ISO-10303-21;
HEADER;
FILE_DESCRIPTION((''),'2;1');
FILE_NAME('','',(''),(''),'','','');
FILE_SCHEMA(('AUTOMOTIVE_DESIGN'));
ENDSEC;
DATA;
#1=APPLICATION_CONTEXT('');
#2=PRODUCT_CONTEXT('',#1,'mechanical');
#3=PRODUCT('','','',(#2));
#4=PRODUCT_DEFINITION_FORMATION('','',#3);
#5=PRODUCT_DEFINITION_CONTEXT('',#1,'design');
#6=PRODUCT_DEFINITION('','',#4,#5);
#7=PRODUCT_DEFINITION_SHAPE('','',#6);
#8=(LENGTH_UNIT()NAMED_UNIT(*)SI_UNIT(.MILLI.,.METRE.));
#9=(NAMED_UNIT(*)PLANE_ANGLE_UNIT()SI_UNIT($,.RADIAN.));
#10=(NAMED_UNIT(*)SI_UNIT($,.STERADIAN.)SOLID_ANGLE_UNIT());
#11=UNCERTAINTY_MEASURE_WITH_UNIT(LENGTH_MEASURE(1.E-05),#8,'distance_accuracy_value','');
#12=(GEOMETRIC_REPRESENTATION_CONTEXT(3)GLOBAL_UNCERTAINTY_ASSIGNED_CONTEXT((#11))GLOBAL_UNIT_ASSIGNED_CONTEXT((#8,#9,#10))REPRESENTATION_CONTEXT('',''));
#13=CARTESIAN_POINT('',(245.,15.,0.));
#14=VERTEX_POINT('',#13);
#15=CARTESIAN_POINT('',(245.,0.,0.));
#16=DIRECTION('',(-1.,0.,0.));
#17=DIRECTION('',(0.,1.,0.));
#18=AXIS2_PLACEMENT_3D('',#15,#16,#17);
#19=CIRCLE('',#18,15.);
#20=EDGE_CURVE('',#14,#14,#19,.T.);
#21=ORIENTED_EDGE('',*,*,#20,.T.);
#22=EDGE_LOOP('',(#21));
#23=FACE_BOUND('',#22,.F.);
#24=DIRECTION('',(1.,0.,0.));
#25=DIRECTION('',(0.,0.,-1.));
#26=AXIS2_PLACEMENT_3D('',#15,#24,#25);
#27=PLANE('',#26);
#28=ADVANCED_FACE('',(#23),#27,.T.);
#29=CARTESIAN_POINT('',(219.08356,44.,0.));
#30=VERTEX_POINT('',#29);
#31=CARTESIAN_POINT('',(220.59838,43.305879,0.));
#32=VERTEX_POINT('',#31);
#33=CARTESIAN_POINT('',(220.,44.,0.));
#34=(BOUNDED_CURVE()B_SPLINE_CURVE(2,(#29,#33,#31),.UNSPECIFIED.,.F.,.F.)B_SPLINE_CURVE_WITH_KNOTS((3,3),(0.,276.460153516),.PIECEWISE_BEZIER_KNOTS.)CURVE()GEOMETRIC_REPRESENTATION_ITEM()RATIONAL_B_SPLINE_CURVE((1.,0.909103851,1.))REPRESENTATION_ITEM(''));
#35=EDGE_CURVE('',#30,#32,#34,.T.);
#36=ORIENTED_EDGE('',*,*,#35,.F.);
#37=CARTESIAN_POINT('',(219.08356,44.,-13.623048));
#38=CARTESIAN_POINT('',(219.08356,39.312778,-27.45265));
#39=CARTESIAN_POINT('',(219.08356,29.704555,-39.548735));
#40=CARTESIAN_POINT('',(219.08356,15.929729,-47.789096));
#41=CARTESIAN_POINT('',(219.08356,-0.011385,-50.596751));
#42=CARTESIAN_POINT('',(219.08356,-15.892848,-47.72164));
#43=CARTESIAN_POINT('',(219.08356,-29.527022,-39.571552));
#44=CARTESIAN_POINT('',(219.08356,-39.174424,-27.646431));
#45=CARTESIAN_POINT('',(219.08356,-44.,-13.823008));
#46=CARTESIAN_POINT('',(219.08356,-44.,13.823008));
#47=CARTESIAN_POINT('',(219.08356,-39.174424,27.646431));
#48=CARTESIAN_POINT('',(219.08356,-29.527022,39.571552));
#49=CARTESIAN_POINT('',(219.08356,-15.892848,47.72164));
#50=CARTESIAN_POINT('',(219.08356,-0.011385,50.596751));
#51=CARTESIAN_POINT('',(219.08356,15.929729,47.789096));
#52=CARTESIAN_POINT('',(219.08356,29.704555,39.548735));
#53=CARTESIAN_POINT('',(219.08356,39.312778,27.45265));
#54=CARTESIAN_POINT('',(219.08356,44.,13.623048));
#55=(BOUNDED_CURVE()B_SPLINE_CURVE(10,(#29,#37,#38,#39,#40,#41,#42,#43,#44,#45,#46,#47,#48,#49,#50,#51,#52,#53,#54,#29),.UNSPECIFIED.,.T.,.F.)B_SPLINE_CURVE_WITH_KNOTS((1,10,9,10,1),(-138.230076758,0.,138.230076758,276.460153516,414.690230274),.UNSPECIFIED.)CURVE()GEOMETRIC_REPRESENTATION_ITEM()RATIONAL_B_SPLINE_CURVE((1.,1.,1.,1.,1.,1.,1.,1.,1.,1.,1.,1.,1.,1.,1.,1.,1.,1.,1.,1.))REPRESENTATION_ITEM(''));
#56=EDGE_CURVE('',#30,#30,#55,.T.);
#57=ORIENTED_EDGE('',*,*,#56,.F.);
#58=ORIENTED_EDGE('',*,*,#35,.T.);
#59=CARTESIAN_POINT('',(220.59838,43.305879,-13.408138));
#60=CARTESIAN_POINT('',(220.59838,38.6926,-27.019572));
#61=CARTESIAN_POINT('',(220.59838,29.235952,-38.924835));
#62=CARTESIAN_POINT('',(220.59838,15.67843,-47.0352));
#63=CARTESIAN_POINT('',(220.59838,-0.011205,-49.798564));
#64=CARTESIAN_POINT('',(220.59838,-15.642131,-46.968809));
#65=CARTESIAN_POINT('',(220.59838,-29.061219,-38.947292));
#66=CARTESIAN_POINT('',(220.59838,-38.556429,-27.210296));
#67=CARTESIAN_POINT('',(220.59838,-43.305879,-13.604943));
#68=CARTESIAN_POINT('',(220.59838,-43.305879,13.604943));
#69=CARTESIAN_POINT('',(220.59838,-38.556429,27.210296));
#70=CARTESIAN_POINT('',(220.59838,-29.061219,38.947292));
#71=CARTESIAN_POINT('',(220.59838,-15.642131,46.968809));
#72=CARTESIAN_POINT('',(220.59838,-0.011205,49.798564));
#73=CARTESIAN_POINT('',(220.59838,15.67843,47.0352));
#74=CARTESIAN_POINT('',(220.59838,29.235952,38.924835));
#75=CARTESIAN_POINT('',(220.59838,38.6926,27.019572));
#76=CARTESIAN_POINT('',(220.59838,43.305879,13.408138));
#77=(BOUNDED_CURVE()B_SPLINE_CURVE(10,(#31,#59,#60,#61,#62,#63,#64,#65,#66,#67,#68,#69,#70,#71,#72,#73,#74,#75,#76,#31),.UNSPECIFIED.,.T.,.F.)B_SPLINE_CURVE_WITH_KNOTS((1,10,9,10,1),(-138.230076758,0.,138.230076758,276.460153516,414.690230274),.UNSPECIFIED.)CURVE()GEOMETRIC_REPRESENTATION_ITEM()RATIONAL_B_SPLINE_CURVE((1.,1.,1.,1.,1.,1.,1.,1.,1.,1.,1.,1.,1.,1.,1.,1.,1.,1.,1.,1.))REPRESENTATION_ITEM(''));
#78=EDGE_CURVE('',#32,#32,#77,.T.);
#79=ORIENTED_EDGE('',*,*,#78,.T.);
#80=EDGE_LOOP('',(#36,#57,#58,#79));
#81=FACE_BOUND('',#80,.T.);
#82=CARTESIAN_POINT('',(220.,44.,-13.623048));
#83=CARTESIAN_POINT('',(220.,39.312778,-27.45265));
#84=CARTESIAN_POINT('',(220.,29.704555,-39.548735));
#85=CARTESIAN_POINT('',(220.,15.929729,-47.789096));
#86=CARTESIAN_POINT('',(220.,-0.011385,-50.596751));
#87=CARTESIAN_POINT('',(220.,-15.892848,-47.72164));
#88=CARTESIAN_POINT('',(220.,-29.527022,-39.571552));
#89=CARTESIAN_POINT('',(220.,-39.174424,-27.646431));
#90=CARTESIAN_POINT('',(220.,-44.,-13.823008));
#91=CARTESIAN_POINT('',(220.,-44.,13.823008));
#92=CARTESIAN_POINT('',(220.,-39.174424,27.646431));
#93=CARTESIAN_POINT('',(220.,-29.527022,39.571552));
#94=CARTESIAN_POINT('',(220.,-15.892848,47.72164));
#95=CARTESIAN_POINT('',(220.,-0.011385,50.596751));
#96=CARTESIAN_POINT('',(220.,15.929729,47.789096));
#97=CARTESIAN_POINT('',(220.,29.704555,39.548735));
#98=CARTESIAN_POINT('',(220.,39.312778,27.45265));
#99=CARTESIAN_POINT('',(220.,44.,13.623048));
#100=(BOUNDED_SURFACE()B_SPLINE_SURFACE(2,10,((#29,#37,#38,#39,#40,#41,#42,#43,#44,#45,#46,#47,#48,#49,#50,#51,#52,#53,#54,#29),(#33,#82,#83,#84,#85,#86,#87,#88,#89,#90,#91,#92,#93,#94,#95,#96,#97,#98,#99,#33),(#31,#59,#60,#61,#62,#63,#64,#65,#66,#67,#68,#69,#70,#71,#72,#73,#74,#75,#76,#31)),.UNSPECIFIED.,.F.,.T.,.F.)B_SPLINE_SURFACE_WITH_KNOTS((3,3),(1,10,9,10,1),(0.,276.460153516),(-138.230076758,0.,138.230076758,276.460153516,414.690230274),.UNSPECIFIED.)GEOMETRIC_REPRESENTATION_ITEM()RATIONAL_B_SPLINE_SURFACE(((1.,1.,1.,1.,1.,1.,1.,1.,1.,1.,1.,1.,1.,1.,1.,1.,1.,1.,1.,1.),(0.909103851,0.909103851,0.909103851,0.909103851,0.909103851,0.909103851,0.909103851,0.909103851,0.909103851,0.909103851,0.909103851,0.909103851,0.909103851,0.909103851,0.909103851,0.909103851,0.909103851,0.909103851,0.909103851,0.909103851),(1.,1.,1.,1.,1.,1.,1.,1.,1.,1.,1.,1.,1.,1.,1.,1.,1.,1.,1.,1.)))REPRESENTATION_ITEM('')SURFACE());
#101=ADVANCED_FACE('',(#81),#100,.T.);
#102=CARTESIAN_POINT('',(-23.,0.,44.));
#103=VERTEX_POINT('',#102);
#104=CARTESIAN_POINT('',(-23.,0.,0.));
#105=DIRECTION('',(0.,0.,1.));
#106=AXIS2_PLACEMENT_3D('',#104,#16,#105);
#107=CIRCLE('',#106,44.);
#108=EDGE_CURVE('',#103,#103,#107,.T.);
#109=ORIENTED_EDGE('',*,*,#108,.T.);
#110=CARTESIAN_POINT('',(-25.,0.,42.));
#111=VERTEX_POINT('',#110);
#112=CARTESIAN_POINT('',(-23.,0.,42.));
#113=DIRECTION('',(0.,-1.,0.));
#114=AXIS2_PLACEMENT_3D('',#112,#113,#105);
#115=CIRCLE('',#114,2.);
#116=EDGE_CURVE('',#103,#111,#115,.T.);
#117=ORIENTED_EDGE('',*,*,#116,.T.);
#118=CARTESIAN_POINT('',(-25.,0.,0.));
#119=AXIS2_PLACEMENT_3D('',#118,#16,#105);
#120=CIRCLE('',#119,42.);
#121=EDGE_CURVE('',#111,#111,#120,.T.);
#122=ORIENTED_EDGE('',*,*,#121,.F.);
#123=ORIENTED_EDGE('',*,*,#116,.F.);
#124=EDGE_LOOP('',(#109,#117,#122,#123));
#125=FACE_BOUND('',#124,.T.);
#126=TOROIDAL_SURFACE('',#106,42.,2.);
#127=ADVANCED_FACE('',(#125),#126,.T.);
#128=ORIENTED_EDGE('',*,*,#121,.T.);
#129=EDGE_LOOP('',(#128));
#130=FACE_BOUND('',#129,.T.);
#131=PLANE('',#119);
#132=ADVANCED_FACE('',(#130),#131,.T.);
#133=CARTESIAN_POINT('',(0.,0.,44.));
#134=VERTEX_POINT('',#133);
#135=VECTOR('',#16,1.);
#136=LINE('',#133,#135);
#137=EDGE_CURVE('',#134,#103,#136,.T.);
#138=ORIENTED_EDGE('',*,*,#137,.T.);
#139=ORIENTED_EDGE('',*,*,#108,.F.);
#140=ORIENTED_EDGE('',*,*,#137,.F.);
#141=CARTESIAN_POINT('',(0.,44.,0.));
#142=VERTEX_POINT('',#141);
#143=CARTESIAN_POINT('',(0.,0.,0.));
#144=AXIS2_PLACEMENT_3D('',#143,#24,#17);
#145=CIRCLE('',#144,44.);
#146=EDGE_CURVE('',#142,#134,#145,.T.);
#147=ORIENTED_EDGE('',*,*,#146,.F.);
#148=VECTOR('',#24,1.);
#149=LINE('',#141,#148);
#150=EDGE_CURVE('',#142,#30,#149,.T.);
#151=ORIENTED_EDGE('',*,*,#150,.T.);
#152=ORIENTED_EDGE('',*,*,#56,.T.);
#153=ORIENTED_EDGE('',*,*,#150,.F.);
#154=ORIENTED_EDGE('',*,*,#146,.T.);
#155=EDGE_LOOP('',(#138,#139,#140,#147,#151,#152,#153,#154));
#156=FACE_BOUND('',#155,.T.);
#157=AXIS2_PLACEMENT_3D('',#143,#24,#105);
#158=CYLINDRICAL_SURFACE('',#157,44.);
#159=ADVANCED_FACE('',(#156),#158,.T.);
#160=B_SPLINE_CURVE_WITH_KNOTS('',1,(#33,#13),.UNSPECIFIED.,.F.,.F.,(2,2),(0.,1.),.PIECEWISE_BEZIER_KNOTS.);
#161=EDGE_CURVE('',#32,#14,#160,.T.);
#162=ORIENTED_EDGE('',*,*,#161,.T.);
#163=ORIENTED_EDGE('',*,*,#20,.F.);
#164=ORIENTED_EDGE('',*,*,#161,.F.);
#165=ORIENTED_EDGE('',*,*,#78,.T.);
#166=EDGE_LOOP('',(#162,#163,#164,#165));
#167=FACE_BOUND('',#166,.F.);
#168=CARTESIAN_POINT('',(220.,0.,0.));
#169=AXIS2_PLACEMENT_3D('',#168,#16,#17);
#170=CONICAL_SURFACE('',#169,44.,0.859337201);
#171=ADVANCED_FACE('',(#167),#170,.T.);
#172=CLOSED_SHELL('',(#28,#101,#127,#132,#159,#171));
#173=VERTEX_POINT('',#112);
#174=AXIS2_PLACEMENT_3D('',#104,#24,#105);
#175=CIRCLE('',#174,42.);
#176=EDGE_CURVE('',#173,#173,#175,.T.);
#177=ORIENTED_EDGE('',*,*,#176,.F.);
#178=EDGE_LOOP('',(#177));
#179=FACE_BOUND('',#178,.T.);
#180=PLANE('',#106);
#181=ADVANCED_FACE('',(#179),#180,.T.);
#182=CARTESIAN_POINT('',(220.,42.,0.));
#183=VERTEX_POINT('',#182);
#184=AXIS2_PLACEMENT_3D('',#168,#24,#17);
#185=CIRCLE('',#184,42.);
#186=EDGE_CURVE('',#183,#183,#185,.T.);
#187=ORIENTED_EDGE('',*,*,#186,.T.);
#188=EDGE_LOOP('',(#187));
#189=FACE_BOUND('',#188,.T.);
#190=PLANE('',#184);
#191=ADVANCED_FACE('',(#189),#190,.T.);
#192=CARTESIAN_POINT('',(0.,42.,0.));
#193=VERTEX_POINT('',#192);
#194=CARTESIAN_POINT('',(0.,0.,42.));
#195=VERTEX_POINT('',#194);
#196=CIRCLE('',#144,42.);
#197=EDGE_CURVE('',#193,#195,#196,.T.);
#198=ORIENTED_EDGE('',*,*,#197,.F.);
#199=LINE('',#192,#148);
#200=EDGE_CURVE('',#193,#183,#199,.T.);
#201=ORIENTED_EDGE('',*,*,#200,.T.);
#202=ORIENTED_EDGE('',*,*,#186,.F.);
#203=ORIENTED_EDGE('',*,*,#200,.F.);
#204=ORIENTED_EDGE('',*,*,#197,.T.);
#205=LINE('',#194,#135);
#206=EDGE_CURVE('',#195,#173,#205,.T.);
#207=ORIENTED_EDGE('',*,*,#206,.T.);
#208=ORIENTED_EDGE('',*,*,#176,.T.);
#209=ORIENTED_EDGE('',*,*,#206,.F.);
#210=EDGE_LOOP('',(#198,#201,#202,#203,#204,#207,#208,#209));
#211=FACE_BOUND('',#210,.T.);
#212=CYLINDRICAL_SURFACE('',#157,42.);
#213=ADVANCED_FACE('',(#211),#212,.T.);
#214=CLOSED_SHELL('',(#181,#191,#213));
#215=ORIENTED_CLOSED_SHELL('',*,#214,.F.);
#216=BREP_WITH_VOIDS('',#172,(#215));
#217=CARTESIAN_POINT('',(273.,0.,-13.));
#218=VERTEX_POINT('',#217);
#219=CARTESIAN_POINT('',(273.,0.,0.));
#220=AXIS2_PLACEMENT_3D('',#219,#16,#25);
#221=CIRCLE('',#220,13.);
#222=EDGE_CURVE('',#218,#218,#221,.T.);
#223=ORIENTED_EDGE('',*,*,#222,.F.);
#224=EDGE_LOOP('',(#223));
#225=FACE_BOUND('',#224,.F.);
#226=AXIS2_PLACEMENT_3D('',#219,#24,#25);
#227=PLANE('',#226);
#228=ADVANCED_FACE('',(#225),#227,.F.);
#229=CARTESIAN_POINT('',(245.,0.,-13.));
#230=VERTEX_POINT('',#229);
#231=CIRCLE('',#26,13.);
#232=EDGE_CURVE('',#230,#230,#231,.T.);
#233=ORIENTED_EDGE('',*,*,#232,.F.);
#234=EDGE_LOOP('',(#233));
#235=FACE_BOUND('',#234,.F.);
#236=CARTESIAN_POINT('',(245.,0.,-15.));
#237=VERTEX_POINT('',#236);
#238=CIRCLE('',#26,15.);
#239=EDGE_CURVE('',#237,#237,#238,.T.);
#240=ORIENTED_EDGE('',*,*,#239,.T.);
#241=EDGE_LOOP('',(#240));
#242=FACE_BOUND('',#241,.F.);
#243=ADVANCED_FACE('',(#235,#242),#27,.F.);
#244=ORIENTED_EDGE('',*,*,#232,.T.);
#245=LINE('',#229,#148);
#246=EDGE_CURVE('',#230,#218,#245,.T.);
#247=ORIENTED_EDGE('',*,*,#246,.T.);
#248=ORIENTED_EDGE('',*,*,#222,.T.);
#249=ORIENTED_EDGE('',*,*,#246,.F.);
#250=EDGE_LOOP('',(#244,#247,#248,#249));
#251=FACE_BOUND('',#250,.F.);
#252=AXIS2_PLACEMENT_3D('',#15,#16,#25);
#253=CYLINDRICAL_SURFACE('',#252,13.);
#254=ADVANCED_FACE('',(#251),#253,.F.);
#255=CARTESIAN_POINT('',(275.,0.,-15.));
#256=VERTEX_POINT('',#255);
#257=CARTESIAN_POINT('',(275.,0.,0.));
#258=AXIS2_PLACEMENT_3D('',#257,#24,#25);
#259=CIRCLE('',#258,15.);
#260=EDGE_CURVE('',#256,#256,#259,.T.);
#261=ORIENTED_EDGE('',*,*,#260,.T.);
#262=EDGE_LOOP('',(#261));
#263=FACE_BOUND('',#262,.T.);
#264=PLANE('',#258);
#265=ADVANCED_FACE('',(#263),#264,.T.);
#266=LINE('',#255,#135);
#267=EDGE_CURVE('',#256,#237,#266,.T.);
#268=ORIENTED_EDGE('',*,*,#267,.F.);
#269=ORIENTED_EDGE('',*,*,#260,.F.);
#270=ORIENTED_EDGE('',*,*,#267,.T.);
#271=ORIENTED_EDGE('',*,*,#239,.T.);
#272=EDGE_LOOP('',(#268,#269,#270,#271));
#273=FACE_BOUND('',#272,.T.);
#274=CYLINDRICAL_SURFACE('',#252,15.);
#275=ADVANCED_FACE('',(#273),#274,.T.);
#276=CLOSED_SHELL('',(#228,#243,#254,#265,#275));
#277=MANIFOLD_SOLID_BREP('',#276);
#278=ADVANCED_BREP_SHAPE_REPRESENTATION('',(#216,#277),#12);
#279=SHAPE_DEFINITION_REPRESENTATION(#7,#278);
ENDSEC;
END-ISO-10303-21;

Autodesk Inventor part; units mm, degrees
ref_plane "YZ Plane" through (0, 0, 0) normal (1, 0, 0) x (0, 1, 0)
ref_plane "XZ Plane" through (0, 0, 0) normal (0, 1, 0) x (-1, 0, 0)
sketch "スケッチ4" plane through (0, 0, 0) normal (1, 0, 0) x (0, 1, 0)
  circle A0 centre (0, 0) radius 44
  circle A1 centre (0, 0) radius 42
  dimension "d6" = 88
  dimension "d7" = 2
extrude "押し出し3" add sketch "スケッチ4" along normal blind 220
ref_plane "作業平面1" through (245, 0, 0) normal (1, 0, 0) x (0, 0, -1)
sketch "スケッチ5" plane through (245, 0, 0) normal (1, 0, 0) x (0, 0, -1)
  circle A0 centre (0, 0) radius 15
  circle A1 centre (0, 0) radius 13
  dimension "d11" = 30
  dimension "d12" = 2
extrude "押し出し4" add sketch "スケッチ5" along normal blind 30 separate body
sketch "スケッチ6" plane through (275, 0, 0) normal (1, 0, 0) x (0, 0, -1)
  circle A0 centre (0, 0) radius 15
extrude "押し出し5" add sketch "スケッチ6" against normal blind 2 bodies 2
loft "ロフト2" add bodies 1 section 1 edges at (220, -44, 0) section 2 edges at (245, 0, 15)
fillet "フィレット1" radius 2 1 edges at (220, -44, 0)
sketch "スケッチ7" plane through (0, 0, 0) normal (-1, 0, 0) x (0, 0, 1)
  circle A0 centre (0, 0) radius 44
  circle A1 centre (0, 0) radius 42
extrude "押し出し6" add sketch "スケッチ7" along normal blind 25 bodies 1
sketch "スケッチ8" plane through (-25, 0, 0) normal (-1, 0, 0) x (0, 0, 1)
  circle A0 centre (0, 0) radius 44
extrude "押し出し7" add sketch "スケッチ8" against normal blind 2 bodies 1
fillet "フィレット2" radius 2 1 edges at (-25, 0, -44)
properties part number "roller-Base-v1-petbottle" material "PET プラスチック"
